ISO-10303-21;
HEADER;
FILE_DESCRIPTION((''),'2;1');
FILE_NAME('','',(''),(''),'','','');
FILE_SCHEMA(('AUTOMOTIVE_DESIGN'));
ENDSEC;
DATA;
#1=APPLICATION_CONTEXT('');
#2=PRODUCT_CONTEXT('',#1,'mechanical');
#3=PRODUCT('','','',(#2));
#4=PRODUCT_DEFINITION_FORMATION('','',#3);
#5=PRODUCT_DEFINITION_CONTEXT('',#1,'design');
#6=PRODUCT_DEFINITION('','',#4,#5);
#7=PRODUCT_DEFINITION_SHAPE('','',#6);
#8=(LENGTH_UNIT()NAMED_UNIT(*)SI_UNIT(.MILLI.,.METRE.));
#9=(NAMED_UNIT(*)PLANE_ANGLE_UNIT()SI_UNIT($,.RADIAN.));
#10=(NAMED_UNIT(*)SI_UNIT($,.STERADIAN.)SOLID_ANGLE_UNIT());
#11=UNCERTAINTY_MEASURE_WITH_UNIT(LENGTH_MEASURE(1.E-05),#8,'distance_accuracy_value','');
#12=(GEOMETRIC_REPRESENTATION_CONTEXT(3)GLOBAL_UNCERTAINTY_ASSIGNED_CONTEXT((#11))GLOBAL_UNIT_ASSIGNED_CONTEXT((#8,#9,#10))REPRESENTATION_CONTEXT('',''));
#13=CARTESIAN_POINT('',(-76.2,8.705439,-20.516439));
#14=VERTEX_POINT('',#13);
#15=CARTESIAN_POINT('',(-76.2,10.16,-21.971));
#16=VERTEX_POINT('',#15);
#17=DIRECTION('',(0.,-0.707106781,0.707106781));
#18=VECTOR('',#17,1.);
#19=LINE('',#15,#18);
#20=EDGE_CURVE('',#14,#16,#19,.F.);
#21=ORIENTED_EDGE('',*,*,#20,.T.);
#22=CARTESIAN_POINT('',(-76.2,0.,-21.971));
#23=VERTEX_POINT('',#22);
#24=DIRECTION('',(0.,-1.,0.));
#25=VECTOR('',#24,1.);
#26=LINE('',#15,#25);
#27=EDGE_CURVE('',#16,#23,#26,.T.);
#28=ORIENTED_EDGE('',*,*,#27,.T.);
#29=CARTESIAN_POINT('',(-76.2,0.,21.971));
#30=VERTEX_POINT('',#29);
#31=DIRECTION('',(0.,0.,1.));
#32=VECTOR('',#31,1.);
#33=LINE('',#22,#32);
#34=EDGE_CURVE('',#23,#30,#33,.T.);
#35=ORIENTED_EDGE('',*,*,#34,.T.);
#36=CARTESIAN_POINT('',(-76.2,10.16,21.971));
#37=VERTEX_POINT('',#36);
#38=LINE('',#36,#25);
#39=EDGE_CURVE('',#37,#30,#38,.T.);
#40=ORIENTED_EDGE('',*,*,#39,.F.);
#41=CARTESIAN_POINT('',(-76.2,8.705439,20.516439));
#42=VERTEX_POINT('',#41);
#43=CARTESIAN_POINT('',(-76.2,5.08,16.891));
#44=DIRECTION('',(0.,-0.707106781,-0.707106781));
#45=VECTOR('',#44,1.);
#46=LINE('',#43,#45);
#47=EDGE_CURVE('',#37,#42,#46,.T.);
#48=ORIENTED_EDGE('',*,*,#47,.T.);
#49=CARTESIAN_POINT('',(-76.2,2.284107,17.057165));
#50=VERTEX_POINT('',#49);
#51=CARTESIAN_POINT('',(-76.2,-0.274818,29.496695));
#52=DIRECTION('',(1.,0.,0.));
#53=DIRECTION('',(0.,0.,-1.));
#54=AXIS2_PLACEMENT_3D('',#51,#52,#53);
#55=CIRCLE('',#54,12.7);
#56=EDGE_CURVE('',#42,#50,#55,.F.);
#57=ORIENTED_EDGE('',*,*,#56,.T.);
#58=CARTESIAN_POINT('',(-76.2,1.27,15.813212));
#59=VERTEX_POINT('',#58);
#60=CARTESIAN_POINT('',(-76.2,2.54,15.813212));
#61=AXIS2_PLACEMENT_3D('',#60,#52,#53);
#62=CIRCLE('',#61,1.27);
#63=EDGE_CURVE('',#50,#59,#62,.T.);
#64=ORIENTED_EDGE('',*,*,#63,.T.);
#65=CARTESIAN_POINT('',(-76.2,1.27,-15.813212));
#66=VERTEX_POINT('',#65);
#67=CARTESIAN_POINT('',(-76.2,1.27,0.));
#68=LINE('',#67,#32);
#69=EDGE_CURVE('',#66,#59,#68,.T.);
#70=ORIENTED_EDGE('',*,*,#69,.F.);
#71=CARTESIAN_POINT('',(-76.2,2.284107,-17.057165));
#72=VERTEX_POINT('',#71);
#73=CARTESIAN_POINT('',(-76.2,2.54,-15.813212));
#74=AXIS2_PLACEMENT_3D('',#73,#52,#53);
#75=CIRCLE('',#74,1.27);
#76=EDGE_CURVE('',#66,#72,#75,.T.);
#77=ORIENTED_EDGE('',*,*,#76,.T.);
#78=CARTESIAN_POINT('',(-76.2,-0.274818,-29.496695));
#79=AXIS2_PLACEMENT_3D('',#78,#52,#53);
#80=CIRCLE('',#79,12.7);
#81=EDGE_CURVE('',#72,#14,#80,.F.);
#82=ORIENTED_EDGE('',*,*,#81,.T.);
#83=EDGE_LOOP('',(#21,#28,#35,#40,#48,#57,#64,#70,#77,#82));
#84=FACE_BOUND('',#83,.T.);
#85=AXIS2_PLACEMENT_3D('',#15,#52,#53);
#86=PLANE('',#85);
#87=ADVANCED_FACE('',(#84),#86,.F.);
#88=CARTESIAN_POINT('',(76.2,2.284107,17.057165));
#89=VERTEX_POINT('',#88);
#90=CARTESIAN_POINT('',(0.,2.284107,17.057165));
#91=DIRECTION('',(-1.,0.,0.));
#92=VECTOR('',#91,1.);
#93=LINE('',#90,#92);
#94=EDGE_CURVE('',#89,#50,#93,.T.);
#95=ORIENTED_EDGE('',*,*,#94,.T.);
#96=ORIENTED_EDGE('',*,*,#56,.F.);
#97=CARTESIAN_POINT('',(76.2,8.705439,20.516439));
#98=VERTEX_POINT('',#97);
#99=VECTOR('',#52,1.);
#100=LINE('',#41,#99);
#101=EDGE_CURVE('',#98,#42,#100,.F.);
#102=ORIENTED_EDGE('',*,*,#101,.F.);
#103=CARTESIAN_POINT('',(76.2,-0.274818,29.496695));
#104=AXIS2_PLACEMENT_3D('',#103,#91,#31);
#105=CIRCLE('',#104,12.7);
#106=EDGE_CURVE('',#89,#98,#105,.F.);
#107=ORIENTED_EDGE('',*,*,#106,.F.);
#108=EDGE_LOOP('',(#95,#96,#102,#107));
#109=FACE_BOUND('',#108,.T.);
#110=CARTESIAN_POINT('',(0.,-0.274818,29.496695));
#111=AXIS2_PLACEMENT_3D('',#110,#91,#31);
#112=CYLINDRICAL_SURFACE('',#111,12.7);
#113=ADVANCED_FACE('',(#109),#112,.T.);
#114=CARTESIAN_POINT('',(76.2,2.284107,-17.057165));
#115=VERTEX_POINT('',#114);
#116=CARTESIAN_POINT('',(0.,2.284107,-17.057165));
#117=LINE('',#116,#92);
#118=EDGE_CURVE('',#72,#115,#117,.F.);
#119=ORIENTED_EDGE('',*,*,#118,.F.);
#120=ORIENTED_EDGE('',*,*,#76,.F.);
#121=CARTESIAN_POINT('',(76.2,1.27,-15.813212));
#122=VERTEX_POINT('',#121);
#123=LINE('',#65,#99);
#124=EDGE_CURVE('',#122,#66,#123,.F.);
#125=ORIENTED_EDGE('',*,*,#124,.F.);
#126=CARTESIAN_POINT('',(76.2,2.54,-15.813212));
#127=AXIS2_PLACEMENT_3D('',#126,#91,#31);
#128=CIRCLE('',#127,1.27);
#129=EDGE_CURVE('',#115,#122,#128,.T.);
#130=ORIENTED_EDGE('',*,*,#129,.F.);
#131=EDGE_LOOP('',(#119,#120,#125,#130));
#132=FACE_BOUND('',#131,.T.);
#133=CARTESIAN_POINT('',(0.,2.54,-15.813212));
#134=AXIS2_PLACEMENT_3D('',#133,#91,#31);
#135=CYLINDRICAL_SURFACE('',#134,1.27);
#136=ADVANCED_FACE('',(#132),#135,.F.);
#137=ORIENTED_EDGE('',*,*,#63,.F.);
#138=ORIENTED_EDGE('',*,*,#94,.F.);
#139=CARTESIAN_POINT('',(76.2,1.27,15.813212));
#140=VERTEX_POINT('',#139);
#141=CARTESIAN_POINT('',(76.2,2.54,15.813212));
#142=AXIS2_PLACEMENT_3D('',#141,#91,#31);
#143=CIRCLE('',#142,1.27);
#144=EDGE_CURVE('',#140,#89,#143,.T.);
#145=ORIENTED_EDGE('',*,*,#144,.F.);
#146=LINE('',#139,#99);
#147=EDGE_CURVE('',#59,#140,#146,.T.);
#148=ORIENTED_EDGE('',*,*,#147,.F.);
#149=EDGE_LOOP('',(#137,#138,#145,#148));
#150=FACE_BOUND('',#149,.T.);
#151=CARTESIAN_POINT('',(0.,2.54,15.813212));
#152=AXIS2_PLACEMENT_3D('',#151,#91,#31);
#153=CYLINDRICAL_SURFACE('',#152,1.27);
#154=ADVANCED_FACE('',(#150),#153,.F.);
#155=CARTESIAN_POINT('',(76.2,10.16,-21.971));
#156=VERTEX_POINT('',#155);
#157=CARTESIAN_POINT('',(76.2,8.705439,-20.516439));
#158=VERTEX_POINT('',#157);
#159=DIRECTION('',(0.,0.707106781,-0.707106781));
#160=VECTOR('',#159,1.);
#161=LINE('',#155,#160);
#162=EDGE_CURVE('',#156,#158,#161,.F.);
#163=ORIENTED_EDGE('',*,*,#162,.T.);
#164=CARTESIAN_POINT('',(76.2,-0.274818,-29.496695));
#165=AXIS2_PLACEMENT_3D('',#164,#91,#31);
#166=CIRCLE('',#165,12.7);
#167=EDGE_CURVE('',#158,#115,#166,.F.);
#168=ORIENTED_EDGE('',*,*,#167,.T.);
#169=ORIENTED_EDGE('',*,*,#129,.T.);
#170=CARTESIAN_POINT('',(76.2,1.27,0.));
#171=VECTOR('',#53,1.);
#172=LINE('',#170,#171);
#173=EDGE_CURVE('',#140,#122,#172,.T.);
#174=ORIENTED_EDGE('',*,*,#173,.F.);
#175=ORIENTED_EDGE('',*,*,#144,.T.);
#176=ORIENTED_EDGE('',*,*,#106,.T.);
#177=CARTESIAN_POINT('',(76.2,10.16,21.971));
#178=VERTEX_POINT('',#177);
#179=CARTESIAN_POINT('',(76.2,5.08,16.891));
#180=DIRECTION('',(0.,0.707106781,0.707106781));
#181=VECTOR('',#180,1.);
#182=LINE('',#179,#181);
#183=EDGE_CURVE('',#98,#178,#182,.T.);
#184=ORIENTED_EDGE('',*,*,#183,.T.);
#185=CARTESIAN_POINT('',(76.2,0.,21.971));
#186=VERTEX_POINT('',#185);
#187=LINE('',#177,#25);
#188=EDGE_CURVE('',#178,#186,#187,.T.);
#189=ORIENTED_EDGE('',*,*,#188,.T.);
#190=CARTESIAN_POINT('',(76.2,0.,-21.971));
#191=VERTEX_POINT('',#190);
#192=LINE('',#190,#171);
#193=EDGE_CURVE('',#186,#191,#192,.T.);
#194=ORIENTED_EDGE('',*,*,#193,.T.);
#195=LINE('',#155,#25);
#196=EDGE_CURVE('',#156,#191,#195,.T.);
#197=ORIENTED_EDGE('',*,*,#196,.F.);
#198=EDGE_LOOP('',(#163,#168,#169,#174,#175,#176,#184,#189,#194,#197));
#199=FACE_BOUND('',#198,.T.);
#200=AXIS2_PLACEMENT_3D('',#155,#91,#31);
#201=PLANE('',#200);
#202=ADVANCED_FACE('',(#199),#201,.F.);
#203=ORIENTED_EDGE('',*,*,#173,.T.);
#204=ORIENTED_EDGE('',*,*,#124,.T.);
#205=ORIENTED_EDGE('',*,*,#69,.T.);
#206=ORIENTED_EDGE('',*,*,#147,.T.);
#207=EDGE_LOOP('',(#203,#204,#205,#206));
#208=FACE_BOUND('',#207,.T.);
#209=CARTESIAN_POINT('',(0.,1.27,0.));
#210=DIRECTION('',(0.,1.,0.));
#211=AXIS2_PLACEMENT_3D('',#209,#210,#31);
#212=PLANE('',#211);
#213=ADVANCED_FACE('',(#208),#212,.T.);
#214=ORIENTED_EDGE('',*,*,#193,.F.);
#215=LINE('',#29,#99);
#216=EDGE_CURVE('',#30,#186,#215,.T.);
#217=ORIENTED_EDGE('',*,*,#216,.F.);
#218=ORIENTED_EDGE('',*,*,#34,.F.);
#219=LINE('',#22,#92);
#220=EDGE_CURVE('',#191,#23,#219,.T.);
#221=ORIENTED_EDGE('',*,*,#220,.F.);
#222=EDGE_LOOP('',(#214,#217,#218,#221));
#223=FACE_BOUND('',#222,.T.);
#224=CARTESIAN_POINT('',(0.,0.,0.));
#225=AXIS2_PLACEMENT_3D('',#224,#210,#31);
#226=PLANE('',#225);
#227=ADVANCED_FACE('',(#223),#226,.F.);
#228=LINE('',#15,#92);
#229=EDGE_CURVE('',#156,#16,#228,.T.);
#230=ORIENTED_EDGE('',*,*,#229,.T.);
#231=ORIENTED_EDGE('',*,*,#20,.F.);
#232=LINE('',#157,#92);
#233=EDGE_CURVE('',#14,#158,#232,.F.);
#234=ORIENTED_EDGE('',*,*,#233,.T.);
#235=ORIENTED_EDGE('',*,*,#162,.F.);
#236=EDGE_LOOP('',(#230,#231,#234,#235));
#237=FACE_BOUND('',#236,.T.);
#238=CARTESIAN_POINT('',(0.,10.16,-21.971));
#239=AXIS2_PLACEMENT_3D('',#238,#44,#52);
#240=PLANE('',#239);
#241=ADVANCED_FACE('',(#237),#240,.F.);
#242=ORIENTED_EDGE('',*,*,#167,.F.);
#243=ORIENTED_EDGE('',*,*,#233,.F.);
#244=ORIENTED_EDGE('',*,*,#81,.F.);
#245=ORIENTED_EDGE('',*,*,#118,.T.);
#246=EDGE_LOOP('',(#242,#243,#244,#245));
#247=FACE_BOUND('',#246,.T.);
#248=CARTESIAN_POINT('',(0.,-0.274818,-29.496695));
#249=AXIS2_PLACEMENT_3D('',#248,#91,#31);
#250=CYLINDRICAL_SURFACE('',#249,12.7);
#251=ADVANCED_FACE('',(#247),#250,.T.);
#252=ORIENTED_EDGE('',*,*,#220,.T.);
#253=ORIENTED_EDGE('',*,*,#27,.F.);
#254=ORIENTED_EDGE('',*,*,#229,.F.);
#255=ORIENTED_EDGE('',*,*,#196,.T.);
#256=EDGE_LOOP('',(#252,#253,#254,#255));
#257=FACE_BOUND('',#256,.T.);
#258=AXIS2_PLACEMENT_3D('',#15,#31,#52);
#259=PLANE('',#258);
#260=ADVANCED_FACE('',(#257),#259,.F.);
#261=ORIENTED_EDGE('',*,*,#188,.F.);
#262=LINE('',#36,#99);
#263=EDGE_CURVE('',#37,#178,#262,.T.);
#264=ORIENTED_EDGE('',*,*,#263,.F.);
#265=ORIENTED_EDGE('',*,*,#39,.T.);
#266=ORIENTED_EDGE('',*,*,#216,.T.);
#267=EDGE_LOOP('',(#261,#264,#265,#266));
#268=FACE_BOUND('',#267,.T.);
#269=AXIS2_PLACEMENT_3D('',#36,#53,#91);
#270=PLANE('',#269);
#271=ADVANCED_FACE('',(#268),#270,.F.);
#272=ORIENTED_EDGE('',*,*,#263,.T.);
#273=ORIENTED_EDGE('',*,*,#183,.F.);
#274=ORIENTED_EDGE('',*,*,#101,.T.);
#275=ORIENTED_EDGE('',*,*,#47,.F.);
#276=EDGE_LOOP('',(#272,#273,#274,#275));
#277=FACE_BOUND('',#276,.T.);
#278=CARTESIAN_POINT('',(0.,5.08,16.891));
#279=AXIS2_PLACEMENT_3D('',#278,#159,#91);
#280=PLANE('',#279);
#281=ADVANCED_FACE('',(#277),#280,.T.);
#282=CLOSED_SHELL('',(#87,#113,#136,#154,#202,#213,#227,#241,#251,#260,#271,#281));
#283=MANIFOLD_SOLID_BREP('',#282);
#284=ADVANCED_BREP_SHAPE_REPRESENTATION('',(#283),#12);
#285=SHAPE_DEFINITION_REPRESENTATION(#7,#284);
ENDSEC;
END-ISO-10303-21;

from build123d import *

# Parameters (mm, degrees)
SKETCH1_W           = 152.4
SKETCH1_H           = 43.942
BOSS_EXTRUDE1_DEPTH = 10.16
SKETCH2_W           = 139.7
SKETCH2_H           = 33.782
SKETCH2_W_2         = 6.35
CUT_EXTRUDE1_DEPTH  = 8.89
CHAMFER1_SIZE       = 5.08
FILLET1_R           = 12.7
FILLET2_R           = 1.27


# Some blends are built 0.0001 mm under size
with BuildPart() as part:
    # Sketch1 → Boss-Extrude1 (new body)
    with BuildSketch(Plane(origin=(0, 0, 0), x_dir=(1, 0, 0), z_dir=(0, 1, 0))):
        Rectangle(SKETCH1_W, SKETCH1_H)
    extrude(amount=BOSS_EXTRUDE1_DEPTH)

    # Sketch2 → Cut-Extrude1 (cut)
    with BuildSketch(Plane(origin=(0, 10.16, 0), x_dir=(1, 0, 0), z_dir=(0, 1, 0))):
        Rectangle(SKETCH2_W, SKETCH2_H)
        with Locations((73.025, 0)):
            Rectangle(SKETCH2_W_2, SKETCH2_H)
        with Locations((-73.025, 0)):
            Rectangle(SKETCH2_W_2, SKETCH2_H)
    extrude(amount=-CUT_EXTRUDE1_DEPTH, mode=Mode.SUBTRACT)

    # Chamfer1
    chamfer1_edges = [part.edges().sort_by_distance(p)[0] for p in [
        (0, 10.16, 16.891),
        (0, 10.16, -16.891),
    ]]
    chamfer(chamfer1_edges, length=CHAMFER1_SIZE - 0.0001)  # a hair under: the kernel refuses the full size

    # Fillet1
    # the kernel refuses this fillet: 12.7 mm, written as the material it takes off along each edge
    with BuildSketch(Plane(origin=(89.017910379, 5.0801, 16.891), x_dir=(0, -1, 0), z_dir=(-1, 0, 0))) as fillet1_piece_1:
        with BuildLine():
            CenterArc((5.354803581, 12.605708661), FILLET1_R, 225, 38.013804416)
            Line((-3.62545254, 3.62545254), (-3.805057662, 3.445847418))
            Line((-3.805057662, 3.445847418), (-0.179605122, -0.179605122))
            Line((-0.179605122, -0.179605122), (0, -0.254))
            ThreePointArc((0, -0.254), (1.90505, -0.254), (3.779205928, -0.252114173))
            Line((3.779205928, -0.252114173), (3.8101, 0))
        make_face()
    extrude(amount=178.035820759, mode=Mode.SUBTRACT)
    with BuildSketch(Plane(origin=(89.017910379, 5.0801, -16.891), x_dir=(0, 0.7071067811865476, -0.7071067811865476), z_dir=(-1, 0, 0))) as fillet1_piece_2:
        with BuildLine():
            CenterArc((5.127164152, 12.7), FILLET1_R, 231.986195584, 38.013804416)
            Line((-2.694147547, 2.694147547), (-2.850573781, 2.494030498))
            ThreePointArc((-2.850573781, 2.494030498), (-1.526678896, 1.167468651), (-0.179605122, -0.179605122))
            Line((-0.179605122, -0.179605122), (0, -0.254))
            Line((0, -0.254), (5.127164152, -0.254))
            Line((5.127164152, -0.254), (5.127164152, 0))
        make_face()
    extrude(amount=178.035820759, mode=Mode.SUBTRACT)

    # Fillet2
    fillet2_edges = [part.edges().sort_by_distance(p)[0] for p in [
        (0, 1.27, 16.891),
        (0, 1.27, -16.891),
    ]]
    fillet(fillet2_edges, radius=FILLET2_R)


solid = part.part
